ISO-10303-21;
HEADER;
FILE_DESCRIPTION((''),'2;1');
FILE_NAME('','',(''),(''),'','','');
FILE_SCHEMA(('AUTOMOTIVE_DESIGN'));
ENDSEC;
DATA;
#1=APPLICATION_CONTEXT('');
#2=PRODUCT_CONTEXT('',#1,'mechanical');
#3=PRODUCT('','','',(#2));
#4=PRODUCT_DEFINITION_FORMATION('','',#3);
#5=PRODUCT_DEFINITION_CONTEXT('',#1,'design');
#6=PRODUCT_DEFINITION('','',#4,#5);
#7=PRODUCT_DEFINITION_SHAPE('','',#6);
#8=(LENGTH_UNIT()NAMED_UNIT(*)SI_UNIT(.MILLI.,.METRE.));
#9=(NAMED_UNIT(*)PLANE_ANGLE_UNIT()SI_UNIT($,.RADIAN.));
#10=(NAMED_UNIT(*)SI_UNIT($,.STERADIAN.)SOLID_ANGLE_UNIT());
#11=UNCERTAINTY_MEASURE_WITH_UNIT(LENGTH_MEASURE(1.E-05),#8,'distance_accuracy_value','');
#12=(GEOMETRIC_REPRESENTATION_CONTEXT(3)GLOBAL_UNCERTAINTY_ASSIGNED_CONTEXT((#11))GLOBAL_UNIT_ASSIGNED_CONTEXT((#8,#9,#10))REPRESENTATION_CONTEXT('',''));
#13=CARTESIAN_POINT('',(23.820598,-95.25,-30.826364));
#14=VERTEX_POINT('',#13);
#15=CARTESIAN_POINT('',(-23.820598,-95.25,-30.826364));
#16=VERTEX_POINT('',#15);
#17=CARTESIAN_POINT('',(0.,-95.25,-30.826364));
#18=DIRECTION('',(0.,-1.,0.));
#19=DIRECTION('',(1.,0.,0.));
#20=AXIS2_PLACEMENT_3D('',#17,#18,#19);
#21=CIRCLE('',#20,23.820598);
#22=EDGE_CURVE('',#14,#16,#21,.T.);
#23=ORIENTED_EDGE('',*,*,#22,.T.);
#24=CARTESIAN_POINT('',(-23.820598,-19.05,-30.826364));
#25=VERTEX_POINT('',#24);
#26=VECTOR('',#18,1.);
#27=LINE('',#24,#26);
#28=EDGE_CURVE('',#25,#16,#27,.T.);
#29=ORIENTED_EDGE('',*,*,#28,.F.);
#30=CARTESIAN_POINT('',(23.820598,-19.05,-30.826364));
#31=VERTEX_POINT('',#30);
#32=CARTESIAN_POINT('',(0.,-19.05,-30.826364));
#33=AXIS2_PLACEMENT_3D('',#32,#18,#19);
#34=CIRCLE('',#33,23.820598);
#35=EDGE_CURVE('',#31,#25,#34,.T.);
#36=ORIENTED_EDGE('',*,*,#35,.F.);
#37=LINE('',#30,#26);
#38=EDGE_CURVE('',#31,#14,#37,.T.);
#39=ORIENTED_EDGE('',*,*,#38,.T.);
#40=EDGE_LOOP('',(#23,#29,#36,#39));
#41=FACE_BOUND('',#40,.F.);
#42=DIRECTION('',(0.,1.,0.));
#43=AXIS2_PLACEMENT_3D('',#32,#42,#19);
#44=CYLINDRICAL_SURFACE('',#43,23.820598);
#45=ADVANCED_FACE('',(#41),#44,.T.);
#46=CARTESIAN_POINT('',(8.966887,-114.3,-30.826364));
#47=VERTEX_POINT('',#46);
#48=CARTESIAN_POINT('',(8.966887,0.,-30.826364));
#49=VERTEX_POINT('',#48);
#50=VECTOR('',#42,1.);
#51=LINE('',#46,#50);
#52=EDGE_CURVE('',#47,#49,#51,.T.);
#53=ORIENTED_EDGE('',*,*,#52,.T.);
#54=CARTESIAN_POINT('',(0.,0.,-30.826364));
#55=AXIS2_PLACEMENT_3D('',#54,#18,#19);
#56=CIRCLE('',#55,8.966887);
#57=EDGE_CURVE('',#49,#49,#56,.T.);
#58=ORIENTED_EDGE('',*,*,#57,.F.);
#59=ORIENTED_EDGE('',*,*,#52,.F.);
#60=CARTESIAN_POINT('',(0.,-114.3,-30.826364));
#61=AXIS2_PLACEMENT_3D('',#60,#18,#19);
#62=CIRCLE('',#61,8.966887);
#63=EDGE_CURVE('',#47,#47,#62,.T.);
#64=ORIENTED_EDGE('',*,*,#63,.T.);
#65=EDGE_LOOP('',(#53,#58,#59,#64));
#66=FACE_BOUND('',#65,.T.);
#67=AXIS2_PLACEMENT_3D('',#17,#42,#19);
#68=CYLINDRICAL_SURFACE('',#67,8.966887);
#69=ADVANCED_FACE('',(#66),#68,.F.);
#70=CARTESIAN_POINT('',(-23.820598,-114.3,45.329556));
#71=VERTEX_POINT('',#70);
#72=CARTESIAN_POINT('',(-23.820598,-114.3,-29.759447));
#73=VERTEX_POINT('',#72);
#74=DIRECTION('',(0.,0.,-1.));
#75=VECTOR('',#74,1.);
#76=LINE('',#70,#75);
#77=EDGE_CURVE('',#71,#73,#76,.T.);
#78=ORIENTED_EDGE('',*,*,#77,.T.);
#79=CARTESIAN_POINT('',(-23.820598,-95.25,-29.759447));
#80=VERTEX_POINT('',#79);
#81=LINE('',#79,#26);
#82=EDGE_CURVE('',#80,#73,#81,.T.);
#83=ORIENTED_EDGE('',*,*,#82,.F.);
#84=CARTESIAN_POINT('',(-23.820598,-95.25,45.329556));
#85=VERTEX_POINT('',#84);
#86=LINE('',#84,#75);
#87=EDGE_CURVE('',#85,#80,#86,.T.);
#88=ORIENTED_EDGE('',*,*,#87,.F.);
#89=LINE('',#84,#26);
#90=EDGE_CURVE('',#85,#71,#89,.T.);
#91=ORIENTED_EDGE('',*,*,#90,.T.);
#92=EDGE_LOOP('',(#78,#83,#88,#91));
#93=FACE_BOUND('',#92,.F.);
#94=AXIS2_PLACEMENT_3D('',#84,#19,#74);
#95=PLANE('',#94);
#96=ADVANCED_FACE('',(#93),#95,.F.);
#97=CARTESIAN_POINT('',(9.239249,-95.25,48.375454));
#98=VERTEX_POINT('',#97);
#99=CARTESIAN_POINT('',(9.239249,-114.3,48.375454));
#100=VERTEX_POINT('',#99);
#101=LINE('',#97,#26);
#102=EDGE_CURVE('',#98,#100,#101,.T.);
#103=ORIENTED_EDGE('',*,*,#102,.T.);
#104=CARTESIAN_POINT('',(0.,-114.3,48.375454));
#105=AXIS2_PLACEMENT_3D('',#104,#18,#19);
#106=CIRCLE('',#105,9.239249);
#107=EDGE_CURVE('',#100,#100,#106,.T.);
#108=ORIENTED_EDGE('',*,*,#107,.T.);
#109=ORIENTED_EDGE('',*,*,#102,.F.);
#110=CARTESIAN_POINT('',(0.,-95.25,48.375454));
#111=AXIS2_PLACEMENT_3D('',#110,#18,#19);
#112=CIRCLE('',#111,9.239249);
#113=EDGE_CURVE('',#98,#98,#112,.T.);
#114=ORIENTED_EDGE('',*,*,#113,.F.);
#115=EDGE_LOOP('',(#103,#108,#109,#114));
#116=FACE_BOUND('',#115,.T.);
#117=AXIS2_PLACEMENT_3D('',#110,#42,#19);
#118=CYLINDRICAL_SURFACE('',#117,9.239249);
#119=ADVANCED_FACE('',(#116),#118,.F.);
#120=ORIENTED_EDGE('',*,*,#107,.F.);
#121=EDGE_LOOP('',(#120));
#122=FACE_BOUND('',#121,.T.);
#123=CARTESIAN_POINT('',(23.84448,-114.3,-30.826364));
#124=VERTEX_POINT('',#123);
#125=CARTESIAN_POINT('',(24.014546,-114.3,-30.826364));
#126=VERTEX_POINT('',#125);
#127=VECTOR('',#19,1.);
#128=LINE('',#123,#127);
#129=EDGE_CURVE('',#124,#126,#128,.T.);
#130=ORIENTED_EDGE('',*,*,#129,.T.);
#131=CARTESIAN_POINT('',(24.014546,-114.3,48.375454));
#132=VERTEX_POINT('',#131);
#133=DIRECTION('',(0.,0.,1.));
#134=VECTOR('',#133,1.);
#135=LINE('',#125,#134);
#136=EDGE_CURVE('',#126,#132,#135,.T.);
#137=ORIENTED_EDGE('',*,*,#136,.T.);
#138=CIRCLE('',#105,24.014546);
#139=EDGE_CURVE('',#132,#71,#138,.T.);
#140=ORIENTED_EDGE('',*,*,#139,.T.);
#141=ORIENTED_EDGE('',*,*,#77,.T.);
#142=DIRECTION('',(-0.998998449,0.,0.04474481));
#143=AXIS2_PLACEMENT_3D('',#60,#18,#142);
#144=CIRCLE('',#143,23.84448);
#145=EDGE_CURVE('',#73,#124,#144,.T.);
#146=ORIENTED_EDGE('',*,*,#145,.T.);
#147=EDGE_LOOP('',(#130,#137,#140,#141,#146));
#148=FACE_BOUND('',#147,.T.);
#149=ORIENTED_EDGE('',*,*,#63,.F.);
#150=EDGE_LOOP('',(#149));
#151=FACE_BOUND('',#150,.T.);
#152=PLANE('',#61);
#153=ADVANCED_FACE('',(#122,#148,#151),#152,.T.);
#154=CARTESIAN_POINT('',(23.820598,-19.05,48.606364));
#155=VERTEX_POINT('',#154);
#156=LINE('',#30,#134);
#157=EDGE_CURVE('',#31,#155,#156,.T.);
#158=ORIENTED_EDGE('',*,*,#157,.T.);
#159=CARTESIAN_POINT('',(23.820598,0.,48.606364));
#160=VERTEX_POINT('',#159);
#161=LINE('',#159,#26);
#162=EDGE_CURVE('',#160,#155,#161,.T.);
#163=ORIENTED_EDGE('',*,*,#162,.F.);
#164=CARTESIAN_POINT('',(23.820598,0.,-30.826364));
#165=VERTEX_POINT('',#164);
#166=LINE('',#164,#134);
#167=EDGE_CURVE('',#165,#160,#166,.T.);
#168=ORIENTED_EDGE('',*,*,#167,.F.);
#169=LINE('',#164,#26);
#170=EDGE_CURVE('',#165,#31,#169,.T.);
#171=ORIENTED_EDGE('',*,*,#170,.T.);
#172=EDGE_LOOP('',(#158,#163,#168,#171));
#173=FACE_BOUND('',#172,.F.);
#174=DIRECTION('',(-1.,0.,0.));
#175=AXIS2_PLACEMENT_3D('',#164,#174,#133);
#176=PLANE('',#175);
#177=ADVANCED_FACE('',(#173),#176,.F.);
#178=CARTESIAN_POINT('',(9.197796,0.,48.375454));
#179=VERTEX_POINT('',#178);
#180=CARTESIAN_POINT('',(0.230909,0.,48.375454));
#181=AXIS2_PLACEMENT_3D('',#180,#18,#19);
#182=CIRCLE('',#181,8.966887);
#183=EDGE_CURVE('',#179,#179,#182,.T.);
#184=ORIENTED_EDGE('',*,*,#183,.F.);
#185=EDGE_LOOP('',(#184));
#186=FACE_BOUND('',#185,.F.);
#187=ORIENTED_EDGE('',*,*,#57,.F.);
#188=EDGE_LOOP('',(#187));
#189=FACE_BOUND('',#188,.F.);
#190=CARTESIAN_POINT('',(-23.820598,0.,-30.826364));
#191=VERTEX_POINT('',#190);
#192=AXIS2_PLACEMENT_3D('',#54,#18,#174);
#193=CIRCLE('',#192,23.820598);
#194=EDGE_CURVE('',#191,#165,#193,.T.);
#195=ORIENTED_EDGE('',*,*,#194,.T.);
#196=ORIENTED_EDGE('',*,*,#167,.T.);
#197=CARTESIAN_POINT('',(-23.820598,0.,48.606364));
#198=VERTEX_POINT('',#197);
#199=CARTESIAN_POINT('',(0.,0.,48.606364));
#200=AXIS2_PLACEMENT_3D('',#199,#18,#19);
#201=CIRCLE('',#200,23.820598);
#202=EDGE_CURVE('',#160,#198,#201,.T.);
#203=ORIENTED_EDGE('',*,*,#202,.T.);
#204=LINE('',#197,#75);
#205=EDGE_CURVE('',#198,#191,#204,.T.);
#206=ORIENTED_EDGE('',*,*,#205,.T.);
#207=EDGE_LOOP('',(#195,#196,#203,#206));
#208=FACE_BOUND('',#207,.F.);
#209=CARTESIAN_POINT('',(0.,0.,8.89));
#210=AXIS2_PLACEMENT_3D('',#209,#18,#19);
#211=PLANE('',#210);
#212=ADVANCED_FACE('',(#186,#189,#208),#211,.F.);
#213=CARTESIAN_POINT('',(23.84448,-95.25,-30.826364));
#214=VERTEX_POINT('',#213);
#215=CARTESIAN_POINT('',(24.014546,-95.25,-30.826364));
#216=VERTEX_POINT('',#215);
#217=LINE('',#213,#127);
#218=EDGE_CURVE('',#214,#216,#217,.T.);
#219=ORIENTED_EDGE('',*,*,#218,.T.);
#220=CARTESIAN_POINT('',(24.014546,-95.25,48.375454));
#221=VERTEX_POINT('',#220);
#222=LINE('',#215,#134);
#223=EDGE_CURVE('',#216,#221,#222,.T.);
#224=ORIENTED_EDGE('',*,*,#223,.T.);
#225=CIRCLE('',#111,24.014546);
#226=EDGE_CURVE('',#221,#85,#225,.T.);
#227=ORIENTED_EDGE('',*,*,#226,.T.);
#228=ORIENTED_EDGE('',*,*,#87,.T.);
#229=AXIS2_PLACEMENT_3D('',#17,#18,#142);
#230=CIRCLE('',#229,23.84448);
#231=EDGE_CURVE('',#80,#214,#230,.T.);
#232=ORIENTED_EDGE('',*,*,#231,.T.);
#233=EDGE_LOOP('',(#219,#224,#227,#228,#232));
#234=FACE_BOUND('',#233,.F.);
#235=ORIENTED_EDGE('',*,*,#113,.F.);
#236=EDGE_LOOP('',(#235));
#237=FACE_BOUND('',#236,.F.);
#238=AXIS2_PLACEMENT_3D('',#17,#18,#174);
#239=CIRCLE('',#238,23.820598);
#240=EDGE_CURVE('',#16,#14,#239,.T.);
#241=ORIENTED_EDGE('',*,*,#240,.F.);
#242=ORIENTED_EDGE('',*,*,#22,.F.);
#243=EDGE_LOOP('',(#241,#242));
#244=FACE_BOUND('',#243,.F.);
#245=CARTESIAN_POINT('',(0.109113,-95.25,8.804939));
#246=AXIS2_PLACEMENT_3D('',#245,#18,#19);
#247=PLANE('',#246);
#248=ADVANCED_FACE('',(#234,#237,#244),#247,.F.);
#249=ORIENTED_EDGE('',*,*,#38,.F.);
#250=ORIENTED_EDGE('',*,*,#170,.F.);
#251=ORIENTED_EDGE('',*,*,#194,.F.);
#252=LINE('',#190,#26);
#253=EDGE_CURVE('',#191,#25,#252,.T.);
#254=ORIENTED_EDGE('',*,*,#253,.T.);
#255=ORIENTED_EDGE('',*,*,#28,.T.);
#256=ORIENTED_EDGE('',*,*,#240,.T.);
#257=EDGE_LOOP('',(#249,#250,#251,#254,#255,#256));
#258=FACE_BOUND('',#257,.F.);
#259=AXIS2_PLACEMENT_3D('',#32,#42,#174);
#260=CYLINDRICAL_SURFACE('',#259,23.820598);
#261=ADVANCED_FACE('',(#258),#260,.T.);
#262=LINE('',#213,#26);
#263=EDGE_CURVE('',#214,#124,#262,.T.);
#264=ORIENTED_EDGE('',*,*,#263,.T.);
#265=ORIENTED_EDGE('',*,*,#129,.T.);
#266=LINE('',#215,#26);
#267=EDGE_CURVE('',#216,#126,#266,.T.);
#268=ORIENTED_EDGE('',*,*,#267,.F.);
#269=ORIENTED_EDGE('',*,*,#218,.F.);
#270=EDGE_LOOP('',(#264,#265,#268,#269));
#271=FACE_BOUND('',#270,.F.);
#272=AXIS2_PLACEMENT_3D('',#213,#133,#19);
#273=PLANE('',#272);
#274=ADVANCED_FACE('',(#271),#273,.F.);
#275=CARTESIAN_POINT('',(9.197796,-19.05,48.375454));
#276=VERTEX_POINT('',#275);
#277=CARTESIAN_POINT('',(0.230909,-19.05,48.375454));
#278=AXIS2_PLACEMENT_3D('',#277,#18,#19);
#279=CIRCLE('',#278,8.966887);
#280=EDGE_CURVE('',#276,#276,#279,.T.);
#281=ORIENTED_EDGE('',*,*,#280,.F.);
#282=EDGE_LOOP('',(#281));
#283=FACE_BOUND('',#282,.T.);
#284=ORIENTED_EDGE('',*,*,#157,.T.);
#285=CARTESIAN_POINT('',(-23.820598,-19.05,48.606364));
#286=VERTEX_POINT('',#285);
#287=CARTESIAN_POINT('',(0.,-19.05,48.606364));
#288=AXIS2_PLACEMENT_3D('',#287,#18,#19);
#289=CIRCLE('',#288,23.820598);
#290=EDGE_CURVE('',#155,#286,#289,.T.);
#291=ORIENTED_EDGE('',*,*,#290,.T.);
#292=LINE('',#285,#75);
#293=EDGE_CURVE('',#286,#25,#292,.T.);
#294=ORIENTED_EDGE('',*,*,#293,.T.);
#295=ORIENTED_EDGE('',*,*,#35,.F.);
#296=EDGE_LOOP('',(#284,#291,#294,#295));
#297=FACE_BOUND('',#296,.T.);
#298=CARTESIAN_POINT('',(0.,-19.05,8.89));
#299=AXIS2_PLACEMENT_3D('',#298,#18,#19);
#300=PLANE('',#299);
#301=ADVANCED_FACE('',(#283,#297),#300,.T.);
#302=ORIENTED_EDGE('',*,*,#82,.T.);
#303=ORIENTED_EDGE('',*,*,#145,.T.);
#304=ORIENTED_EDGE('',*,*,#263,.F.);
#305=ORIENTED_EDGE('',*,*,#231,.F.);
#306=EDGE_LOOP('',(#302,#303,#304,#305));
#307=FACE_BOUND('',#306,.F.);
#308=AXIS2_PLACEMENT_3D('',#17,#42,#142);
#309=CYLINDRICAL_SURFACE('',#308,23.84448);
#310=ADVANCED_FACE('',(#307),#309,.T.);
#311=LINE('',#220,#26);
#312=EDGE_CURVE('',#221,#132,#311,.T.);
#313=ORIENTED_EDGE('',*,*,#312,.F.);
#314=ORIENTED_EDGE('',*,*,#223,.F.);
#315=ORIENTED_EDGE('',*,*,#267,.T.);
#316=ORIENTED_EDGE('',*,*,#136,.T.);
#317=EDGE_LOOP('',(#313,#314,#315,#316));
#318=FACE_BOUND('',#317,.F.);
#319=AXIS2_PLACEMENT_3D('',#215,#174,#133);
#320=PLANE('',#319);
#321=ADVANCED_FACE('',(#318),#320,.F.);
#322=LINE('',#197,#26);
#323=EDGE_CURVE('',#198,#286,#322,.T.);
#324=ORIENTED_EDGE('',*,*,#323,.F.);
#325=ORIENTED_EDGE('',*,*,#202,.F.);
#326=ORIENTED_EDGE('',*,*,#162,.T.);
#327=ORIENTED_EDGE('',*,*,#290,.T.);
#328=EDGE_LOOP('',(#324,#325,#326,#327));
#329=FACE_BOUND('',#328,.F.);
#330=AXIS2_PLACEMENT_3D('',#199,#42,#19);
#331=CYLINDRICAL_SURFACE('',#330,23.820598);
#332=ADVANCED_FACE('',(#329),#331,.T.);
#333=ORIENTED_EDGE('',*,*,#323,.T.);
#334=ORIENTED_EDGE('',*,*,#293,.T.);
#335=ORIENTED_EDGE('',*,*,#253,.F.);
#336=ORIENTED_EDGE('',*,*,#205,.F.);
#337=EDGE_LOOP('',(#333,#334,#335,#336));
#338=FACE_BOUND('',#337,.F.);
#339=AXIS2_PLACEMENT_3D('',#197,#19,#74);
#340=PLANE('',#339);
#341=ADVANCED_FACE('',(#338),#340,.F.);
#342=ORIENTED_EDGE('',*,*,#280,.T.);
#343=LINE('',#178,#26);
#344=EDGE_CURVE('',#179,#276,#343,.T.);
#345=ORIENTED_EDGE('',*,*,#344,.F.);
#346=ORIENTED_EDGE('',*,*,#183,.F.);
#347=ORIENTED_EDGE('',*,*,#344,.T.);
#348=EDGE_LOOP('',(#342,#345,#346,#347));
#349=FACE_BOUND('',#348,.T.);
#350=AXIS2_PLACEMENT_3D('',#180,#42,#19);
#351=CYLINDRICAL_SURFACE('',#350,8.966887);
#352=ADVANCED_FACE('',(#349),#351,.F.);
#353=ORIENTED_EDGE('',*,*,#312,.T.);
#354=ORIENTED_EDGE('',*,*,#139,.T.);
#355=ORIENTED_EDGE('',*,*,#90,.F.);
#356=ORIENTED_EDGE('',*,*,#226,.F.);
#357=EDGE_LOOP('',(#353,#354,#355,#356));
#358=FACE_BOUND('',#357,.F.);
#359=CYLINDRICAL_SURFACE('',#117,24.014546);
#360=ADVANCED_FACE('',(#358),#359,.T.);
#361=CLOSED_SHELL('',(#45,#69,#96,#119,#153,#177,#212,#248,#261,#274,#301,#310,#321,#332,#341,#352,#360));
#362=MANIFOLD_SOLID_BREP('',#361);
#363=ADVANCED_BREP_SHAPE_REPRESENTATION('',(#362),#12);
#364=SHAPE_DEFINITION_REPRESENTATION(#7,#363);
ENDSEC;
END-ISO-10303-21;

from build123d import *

# Parameters (mm, degrees)
F0_R     = 8.9668874309
F1_DEPTH = 19.05
F2_R     = 8.9668874309
F3_DEPTH = 76.2
F4_R     = 9.2392486584
F5_DEPTH = 19.05
F6_DEPTH = 19.05


with BuildPart() as f1:
    # F0 (on Front) → F1 (new body)
    with BuildSketch(Plane.XZ):
        with BuildLine():
            Line((-23.8205983585, 48.6063640565), (-23.8205983585, -30.8263637125))
            ThreePointArc((-23.8205983585, -30.8263637125), (0, -54.6469620711), (23.8205983585, -30.8263637125))
            Line((23.8205983585, -30.8263637125), (23.8205983585, 48.6063640565))
            ThreePointArc((23.8205983585, 48.6063640565), (0, 72.426962415), (-23.8205983585, 48.6063640565))
        make_face()
        with Locations((0, -30.8263637125)):
            Circle(F0_R, mode=Mode.SUBTRACT)
        with Locations((0.2309088741, 48.3754538)):
            Circle(F0_R, mode=Mode.SUBTRACT)
    extrude(amount=F1_DEPTH)

    # F2 (on face) → F3 (join)
    with BuildSketch(Plane.XZ.offset(19.05)):
        with BuildLine():
            ThreePointArc((-23.8205983585, -30.8263637125), (0, -54.6469620711), (23.8205983585, -30.8263637125))
            ThreePointArc((23.8205983585, -30.8263637125), (0, -7.005765354), (-23.8205983585, -30.8263637125))
        make_face()
        with Locations((0, -30.8263637125)):
            Circle(F2_R, mode=Mode.SUBTRACT)
    extrude(amount=F3_DEPTH)

    # F4 (on face) → F5 (join)
    with BuildSketch(Plane.XZ.offset(95.25)):
        with BuildLine():
            Line((-23.8205983585, 45.3295558312), (-23.8205983585, -29.759446989))
            ThreePointArc((-23.8205983585, -29.759446989), (-0.5335919833, -54.6648724127), (23.8444798109, -30.8263637125))
            Line((23.8444798109, -30.8263637125), (24.0145456046, -30.8263637125))
            Line((24.0145456046, -30.8263637125), (24.0145456046, 48.3754538))
            ThreePointArc((24.0145456046, 48.3754538), (-1.5260332541, 72.3414635451), (-23.8205983585, 45.3295558312))
        make_face()
        with BuildLine():
            ThreePointArc((23.8205983585, -30.8263637125), (0, -54.6469620711), (-23.8205983585, -30.8263637125))
            ThreePointArc((-23.8205983585, -30.8263637125), (0, -7.005765354), (23.8205983585, -30.8263637125))
        make_face(mode=Mode.SUBTRACT)
        with Locations((0, 48.3754538)):
            Circle(F4_R, mode=Mode.SUBTRACT)
    extrude(amount=F5_DEPTH)

    # F6 (add): a face of the model
    f6_faces = [f1.faces().sort_by_distance(p)[0] for p in [
        (-23.1468500933, -95.25, -30.8263637125),
    ]]
    extrude(f6_faces, amount=F6_DEPTH)


solid = f1.part
